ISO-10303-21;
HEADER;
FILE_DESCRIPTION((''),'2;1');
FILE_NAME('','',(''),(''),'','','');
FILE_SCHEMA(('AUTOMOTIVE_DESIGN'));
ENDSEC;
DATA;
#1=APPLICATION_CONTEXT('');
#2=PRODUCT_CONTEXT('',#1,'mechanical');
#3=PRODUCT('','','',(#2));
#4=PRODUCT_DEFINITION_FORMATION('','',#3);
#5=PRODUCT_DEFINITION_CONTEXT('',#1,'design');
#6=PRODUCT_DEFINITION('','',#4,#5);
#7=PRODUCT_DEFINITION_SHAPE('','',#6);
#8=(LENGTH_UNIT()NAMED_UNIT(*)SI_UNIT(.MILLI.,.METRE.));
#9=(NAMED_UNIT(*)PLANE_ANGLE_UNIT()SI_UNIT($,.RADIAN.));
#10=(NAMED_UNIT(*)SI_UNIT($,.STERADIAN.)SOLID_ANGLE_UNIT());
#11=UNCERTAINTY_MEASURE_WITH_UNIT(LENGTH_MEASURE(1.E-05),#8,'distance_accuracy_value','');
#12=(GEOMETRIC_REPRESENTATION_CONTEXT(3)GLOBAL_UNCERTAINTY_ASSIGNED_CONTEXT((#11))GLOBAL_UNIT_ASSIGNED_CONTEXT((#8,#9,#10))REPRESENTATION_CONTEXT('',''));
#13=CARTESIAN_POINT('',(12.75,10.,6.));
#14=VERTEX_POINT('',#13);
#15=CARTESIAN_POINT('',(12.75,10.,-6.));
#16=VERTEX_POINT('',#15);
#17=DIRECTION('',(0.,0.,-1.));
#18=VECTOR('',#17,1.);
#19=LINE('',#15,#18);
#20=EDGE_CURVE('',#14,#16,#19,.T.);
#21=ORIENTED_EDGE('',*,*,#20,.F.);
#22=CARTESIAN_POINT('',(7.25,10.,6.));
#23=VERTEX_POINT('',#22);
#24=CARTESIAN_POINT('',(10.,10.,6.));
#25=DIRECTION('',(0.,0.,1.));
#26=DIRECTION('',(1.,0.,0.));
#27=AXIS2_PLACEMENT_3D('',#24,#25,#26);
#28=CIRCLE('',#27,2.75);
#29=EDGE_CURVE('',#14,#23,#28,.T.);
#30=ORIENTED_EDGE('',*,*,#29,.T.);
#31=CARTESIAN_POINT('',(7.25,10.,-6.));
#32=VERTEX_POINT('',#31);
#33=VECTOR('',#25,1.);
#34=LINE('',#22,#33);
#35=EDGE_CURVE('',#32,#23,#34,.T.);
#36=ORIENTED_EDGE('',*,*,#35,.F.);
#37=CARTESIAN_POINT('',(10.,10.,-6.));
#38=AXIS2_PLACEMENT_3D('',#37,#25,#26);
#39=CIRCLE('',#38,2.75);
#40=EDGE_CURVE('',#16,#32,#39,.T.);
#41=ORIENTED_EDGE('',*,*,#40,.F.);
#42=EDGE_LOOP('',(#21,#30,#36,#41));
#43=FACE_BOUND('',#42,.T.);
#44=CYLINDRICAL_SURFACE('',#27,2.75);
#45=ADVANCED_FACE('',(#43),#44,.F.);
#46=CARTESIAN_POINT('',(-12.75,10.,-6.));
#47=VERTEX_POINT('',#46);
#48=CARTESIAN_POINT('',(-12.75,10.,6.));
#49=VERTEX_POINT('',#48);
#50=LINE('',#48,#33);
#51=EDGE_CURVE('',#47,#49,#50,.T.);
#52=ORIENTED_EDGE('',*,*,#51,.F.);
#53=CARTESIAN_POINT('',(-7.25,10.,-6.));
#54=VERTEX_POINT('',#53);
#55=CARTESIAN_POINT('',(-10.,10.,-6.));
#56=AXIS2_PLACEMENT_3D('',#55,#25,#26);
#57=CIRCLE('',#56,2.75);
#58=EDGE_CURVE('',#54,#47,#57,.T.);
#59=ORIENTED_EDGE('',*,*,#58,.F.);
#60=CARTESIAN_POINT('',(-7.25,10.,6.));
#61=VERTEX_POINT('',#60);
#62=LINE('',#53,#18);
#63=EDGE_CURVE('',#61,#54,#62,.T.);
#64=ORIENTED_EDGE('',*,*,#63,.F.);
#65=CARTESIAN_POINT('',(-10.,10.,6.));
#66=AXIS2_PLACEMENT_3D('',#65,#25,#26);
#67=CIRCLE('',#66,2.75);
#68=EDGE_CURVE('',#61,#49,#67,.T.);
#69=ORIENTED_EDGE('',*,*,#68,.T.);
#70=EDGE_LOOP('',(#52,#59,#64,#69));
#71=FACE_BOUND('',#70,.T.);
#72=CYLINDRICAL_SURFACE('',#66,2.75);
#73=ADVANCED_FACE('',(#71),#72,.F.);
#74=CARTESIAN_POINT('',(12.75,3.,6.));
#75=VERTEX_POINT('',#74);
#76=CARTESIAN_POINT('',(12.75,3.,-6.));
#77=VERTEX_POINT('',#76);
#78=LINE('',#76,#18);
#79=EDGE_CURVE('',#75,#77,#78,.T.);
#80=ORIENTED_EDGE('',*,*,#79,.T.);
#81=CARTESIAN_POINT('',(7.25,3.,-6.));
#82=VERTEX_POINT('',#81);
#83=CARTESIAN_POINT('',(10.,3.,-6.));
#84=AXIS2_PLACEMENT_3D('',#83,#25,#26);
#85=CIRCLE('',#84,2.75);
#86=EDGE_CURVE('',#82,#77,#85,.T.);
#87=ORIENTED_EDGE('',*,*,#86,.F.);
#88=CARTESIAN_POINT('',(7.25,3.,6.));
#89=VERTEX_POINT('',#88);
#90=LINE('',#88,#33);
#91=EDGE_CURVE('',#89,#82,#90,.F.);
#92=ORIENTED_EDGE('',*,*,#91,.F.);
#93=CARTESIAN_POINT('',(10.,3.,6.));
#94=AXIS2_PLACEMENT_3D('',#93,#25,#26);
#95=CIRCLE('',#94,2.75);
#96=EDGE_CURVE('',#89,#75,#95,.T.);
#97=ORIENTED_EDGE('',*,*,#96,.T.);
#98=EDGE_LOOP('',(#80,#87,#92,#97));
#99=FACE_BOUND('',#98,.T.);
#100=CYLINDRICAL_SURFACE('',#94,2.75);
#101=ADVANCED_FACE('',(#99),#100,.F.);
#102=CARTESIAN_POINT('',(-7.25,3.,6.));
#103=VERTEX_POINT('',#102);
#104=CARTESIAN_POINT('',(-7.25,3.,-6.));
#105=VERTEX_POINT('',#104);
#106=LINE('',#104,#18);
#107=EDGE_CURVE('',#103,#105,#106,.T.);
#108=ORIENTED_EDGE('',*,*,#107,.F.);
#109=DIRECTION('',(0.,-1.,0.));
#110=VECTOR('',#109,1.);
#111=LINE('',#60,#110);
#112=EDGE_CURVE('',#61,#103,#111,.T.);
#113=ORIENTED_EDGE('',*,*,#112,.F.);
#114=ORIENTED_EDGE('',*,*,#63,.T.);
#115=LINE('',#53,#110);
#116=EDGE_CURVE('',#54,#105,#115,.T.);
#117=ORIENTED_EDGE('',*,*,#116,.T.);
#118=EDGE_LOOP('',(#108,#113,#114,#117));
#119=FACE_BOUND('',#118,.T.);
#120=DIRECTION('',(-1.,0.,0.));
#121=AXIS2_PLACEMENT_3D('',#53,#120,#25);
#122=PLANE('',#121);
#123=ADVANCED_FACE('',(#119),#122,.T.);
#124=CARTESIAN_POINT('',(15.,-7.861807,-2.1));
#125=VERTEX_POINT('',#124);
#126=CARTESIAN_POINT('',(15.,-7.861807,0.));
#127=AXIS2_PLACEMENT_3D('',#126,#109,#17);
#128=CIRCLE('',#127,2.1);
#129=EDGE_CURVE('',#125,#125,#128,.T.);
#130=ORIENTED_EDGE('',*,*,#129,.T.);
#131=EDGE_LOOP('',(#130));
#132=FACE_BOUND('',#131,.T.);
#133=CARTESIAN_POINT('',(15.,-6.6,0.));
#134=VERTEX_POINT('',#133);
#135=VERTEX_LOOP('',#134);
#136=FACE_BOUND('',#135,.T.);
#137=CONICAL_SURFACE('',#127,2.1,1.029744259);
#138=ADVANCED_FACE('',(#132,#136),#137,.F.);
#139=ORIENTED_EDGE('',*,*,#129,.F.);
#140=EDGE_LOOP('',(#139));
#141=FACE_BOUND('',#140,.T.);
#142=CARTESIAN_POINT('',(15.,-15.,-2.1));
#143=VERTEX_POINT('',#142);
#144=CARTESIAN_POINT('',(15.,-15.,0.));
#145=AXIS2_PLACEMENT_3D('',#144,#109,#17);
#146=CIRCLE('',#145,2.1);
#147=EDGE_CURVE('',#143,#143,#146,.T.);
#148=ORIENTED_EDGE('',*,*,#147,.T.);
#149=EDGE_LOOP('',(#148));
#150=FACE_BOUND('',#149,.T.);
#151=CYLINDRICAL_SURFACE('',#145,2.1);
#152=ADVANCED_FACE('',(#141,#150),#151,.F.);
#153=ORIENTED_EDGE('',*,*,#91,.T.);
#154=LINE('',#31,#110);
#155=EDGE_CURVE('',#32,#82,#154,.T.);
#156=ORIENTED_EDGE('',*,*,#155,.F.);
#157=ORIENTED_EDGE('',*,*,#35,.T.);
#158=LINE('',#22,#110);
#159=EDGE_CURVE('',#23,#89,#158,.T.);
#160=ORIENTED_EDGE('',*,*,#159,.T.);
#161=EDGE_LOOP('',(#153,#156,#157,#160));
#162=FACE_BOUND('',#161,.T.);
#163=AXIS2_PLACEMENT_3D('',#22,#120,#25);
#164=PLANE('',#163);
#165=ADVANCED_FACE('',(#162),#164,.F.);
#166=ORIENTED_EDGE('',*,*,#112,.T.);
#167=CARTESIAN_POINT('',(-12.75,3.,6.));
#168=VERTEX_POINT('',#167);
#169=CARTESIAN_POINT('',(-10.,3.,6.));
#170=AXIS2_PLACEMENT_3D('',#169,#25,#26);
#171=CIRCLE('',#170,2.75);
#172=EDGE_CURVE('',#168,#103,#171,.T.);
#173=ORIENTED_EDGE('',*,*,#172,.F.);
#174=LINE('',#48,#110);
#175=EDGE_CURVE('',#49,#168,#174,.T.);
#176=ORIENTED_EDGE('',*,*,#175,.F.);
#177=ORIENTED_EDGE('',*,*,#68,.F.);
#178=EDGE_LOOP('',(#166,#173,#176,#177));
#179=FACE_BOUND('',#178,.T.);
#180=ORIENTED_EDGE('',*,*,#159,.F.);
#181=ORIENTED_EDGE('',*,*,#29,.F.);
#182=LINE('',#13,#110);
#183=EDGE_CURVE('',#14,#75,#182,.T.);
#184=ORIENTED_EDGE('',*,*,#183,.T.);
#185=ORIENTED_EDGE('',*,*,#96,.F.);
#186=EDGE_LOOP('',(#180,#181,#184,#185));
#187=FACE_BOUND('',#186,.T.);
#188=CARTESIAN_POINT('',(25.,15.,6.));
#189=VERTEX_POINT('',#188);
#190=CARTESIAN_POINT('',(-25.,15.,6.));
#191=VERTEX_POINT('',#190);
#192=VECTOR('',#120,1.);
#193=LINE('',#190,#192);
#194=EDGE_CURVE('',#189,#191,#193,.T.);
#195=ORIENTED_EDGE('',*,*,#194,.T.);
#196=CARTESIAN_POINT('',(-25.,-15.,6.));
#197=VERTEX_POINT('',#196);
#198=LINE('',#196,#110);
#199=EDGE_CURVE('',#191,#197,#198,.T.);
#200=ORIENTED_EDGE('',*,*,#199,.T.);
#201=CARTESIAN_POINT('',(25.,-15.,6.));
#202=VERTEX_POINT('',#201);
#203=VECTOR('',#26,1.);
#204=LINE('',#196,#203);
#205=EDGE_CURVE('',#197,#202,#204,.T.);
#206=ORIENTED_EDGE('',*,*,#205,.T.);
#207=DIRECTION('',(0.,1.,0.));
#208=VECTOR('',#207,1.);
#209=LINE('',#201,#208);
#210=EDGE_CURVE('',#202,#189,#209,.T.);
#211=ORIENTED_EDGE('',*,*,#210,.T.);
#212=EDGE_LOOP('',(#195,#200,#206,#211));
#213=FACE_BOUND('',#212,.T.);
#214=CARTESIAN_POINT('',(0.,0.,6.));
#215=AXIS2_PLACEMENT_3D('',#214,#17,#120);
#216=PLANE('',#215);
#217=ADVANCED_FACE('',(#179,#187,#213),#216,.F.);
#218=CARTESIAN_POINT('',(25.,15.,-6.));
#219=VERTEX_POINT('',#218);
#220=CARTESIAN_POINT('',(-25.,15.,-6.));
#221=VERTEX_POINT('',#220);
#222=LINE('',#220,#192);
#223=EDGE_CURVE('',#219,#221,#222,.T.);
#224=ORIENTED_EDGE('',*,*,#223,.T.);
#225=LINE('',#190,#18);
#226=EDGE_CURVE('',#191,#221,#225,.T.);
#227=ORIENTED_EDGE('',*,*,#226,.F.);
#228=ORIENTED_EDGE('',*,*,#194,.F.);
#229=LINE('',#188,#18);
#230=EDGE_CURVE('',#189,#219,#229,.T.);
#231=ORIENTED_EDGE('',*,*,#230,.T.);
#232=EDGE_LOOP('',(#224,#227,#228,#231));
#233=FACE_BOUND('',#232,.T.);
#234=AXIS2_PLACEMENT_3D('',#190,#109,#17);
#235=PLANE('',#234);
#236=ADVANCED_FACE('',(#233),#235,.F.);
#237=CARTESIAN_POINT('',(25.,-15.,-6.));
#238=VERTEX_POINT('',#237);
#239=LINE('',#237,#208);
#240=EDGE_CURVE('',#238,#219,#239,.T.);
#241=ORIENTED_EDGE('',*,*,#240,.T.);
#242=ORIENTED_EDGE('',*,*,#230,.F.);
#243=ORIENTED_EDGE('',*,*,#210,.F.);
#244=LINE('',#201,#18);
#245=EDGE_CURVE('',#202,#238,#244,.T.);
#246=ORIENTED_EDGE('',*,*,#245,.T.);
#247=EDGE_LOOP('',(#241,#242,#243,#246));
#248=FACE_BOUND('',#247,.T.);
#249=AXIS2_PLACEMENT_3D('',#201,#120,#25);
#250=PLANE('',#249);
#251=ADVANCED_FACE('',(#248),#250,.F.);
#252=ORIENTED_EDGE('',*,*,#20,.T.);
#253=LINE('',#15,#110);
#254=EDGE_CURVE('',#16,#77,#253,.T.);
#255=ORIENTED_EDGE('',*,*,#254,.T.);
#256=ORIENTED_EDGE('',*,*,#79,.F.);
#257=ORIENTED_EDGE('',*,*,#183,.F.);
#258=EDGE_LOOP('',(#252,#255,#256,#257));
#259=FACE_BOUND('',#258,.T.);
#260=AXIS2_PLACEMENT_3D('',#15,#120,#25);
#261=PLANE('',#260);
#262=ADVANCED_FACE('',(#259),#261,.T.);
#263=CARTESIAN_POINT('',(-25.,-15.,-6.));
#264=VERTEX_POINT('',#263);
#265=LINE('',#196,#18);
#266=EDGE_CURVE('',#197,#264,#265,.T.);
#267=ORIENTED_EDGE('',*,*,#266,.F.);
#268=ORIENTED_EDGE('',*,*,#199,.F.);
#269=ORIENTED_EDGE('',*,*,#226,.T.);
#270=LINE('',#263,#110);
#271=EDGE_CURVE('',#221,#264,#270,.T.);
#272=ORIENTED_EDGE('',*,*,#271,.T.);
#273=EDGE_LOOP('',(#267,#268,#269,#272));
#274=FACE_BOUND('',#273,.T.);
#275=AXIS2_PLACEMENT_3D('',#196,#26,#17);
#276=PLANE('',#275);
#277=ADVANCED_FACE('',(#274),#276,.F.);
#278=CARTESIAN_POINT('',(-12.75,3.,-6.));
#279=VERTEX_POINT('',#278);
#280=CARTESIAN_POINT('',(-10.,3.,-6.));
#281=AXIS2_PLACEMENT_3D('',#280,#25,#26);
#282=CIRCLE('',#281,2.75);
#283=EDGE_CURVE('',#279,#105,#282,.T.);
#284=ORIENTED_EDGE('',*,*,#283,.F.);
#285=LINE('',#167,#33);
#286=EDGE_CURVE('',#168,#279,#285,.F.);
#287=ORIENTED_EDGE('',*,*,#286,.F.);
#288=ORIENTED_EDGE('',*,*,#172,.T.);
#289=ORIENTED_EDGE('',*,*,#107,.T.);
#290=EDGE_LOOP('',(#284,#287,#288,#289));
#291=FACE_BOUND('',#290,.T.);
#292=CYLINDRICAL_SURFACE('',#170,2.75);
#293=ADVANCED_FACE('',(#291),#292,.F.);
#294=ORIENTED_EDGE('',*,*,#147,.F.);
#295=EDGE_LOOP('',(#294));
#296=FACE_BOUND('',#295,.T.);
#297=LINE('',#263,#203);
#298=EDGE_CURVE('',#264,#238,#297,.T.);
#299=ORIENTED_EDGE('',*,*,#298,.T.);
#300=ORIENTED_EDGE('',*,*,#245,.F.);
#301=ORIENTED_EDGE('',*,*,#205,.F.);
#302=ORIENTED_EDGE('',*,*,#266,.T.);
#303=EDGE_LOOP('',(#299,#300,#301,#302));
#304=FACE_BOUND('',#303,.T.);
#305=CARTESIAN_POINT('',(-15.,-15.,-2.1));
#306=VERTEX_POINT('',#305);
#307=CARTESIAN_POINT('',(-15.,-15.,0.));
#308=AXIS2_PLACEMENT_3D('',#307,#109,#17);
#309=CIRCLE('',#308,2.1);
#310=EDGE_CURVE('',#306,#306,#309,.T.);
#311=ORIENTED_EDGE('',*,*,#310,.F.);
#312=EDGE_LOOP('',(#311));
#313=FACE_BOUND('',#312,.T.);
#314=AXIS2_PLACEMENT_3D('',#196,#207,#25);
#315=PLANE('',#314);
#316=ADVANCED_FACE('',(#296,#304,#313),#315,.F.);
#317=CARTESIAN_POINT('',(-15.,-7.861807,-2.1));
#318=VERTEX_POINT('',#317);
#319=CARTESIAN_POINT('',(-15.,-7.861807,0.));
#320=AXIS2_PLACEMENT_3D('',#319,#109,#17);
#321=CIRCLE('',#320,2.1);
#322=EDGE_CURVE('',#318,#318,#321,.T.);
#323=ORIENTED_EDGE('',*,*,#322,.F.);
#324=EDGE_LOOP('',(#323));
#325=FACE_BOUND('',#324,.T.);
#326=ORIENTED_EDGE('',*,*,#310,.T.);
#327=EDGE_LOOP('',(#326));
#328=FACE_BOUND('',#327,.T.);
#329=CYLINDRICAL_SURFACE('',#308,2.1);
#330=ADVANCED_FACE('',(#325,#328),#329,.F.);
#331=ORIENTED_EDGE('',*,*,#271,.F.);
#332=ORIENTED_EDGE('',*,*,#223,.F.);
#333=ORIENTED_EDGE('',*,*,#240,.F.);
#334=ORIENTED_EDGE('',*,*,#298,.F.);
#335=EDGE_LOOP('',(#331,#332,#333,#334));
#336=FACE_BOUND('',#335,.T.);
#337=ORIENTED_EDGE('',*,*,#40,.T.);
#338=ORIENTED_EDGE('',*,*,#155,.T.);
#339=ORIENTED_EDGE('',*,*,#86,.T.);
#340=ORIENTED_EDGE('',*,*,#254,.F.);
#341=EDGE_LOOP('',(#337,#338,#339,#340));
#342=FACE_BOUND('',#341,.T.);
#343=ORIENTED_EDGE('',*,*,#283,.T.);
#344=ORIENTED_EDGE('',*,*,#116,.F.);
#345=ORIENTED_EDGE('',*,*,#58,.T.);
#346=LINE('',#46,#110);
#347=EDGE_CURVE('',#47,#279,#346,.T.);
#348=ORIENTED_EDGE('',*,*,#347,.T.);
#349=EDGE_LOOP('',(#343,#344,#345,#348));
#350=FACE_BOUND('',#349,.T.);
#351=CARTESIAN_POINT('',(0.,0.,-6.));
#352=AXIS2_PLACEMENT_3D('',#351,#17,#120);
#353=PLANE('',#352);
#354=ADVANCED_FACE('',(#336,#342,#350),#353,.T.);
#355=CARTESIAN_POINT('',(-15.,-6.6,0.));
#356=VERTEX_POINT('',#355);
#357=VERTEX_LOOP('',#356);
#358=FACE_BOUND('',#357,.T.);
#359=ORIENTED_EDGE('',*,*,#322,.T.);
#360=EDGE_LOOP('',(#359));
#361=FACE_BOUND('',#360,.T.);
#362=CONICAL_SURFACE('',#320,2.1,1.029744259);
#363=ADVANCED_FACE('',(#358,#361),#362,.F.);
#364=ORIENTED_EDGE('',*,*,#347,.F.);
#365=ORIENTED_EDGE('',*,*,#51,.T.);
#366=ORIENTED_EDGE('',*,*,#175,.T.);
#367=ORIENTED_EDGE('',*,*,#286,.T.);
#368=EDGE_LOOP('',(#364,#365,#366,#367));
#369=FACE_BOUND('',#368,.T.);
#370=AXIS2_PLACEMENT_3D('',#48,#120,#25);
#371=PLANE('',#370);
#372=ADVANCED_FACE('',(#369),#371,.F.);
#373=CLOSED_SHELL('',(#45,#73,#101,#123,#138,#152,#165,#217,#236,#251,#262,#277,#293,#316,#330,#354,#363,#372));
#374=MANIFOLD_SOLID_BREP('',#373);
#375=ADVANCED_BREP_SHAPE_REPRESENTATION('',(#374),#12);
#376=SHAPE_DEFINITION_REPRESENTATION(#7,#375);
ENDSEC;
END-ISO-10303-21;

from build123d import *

# Parameters (mm, degrees)
SKETCH1_W                = 50
SKETCH1_H                = 30
BOSS_EXTRUDE1_DEPTH      = 6
M5_START                 = -6
M5_CLEARANCE_SLOT1_DEPTH = 12


# Read off the part's stored shape, not the designer's step: M5 Clearance Slot1
with BuildPart() as part:
    # Sketch1 → Boss-Extrude1 (new, symmetric)
    with BuildSketch(Plane.XY):
        Rectangle(SKETCH1_W, SKETCH1_H)
    extrude(amount=BOSS_EXTRUDE1_DEPTH, both=True)

    # M5 Clearance Slot1 outline → M5 Clearance Slot1 (cut)
    with BuildSketch(Plane.XY.offset(M5_START)):
        with BuildLine():
            Line((7.25, 10), (7.25, 3))
            ThreePointArc((7.25, 3), (10, 0.25), (12.75, 3))
            Line((12.75, 3), (12.75, 10))
            ThreePointArc((12.75, 10), (10, 12.75), (7.25, 10))
        make_face()
        with BuildLine():
            Line((-12.75, 10), (-12.75, 3))
            ThreePointArc((-12.75, 3), (-10, 0.25), (-7.25, 3))
            Line((-7.25, 3), (-7.25, 10))
            ThreePointArc((-7.25, 10), (-10, 12.75), (-12.75, 10))
        make_face()
    extrude(amount=M5_CLEARANCE_SLOT1_DEPTH, mode=Mode.SUBTRACT)

    # Sketch5 → M5x0.8 Tapped Hole1 (revolve, cut)
    with BuildSketch(Plane(origin=(15, -15, 0), x_dir=(0, 0, -1), z_dir=(1, 0, 0))):
        Polygon((0, 0), (0, 8.4), (2.1, 7.1381927), (2.1, 0), align=None)
    m5x0_8_tapped_hole1 = revolve(axis=Axis((15, -21.35, 0), (0, 1, 0)), mode=Mode.SUBTRACT)

    # Mirror1: M5x0.8 Tapped Hole1 across plane
    add(m5x0_8_tapped_hole1.mirror(Plane(origin=(0, 0, 0), x_dir=(0, 0, 1), z_dir=(1, 0, 0))), mode=Mode.SUBTRACT)


solid = part.part
